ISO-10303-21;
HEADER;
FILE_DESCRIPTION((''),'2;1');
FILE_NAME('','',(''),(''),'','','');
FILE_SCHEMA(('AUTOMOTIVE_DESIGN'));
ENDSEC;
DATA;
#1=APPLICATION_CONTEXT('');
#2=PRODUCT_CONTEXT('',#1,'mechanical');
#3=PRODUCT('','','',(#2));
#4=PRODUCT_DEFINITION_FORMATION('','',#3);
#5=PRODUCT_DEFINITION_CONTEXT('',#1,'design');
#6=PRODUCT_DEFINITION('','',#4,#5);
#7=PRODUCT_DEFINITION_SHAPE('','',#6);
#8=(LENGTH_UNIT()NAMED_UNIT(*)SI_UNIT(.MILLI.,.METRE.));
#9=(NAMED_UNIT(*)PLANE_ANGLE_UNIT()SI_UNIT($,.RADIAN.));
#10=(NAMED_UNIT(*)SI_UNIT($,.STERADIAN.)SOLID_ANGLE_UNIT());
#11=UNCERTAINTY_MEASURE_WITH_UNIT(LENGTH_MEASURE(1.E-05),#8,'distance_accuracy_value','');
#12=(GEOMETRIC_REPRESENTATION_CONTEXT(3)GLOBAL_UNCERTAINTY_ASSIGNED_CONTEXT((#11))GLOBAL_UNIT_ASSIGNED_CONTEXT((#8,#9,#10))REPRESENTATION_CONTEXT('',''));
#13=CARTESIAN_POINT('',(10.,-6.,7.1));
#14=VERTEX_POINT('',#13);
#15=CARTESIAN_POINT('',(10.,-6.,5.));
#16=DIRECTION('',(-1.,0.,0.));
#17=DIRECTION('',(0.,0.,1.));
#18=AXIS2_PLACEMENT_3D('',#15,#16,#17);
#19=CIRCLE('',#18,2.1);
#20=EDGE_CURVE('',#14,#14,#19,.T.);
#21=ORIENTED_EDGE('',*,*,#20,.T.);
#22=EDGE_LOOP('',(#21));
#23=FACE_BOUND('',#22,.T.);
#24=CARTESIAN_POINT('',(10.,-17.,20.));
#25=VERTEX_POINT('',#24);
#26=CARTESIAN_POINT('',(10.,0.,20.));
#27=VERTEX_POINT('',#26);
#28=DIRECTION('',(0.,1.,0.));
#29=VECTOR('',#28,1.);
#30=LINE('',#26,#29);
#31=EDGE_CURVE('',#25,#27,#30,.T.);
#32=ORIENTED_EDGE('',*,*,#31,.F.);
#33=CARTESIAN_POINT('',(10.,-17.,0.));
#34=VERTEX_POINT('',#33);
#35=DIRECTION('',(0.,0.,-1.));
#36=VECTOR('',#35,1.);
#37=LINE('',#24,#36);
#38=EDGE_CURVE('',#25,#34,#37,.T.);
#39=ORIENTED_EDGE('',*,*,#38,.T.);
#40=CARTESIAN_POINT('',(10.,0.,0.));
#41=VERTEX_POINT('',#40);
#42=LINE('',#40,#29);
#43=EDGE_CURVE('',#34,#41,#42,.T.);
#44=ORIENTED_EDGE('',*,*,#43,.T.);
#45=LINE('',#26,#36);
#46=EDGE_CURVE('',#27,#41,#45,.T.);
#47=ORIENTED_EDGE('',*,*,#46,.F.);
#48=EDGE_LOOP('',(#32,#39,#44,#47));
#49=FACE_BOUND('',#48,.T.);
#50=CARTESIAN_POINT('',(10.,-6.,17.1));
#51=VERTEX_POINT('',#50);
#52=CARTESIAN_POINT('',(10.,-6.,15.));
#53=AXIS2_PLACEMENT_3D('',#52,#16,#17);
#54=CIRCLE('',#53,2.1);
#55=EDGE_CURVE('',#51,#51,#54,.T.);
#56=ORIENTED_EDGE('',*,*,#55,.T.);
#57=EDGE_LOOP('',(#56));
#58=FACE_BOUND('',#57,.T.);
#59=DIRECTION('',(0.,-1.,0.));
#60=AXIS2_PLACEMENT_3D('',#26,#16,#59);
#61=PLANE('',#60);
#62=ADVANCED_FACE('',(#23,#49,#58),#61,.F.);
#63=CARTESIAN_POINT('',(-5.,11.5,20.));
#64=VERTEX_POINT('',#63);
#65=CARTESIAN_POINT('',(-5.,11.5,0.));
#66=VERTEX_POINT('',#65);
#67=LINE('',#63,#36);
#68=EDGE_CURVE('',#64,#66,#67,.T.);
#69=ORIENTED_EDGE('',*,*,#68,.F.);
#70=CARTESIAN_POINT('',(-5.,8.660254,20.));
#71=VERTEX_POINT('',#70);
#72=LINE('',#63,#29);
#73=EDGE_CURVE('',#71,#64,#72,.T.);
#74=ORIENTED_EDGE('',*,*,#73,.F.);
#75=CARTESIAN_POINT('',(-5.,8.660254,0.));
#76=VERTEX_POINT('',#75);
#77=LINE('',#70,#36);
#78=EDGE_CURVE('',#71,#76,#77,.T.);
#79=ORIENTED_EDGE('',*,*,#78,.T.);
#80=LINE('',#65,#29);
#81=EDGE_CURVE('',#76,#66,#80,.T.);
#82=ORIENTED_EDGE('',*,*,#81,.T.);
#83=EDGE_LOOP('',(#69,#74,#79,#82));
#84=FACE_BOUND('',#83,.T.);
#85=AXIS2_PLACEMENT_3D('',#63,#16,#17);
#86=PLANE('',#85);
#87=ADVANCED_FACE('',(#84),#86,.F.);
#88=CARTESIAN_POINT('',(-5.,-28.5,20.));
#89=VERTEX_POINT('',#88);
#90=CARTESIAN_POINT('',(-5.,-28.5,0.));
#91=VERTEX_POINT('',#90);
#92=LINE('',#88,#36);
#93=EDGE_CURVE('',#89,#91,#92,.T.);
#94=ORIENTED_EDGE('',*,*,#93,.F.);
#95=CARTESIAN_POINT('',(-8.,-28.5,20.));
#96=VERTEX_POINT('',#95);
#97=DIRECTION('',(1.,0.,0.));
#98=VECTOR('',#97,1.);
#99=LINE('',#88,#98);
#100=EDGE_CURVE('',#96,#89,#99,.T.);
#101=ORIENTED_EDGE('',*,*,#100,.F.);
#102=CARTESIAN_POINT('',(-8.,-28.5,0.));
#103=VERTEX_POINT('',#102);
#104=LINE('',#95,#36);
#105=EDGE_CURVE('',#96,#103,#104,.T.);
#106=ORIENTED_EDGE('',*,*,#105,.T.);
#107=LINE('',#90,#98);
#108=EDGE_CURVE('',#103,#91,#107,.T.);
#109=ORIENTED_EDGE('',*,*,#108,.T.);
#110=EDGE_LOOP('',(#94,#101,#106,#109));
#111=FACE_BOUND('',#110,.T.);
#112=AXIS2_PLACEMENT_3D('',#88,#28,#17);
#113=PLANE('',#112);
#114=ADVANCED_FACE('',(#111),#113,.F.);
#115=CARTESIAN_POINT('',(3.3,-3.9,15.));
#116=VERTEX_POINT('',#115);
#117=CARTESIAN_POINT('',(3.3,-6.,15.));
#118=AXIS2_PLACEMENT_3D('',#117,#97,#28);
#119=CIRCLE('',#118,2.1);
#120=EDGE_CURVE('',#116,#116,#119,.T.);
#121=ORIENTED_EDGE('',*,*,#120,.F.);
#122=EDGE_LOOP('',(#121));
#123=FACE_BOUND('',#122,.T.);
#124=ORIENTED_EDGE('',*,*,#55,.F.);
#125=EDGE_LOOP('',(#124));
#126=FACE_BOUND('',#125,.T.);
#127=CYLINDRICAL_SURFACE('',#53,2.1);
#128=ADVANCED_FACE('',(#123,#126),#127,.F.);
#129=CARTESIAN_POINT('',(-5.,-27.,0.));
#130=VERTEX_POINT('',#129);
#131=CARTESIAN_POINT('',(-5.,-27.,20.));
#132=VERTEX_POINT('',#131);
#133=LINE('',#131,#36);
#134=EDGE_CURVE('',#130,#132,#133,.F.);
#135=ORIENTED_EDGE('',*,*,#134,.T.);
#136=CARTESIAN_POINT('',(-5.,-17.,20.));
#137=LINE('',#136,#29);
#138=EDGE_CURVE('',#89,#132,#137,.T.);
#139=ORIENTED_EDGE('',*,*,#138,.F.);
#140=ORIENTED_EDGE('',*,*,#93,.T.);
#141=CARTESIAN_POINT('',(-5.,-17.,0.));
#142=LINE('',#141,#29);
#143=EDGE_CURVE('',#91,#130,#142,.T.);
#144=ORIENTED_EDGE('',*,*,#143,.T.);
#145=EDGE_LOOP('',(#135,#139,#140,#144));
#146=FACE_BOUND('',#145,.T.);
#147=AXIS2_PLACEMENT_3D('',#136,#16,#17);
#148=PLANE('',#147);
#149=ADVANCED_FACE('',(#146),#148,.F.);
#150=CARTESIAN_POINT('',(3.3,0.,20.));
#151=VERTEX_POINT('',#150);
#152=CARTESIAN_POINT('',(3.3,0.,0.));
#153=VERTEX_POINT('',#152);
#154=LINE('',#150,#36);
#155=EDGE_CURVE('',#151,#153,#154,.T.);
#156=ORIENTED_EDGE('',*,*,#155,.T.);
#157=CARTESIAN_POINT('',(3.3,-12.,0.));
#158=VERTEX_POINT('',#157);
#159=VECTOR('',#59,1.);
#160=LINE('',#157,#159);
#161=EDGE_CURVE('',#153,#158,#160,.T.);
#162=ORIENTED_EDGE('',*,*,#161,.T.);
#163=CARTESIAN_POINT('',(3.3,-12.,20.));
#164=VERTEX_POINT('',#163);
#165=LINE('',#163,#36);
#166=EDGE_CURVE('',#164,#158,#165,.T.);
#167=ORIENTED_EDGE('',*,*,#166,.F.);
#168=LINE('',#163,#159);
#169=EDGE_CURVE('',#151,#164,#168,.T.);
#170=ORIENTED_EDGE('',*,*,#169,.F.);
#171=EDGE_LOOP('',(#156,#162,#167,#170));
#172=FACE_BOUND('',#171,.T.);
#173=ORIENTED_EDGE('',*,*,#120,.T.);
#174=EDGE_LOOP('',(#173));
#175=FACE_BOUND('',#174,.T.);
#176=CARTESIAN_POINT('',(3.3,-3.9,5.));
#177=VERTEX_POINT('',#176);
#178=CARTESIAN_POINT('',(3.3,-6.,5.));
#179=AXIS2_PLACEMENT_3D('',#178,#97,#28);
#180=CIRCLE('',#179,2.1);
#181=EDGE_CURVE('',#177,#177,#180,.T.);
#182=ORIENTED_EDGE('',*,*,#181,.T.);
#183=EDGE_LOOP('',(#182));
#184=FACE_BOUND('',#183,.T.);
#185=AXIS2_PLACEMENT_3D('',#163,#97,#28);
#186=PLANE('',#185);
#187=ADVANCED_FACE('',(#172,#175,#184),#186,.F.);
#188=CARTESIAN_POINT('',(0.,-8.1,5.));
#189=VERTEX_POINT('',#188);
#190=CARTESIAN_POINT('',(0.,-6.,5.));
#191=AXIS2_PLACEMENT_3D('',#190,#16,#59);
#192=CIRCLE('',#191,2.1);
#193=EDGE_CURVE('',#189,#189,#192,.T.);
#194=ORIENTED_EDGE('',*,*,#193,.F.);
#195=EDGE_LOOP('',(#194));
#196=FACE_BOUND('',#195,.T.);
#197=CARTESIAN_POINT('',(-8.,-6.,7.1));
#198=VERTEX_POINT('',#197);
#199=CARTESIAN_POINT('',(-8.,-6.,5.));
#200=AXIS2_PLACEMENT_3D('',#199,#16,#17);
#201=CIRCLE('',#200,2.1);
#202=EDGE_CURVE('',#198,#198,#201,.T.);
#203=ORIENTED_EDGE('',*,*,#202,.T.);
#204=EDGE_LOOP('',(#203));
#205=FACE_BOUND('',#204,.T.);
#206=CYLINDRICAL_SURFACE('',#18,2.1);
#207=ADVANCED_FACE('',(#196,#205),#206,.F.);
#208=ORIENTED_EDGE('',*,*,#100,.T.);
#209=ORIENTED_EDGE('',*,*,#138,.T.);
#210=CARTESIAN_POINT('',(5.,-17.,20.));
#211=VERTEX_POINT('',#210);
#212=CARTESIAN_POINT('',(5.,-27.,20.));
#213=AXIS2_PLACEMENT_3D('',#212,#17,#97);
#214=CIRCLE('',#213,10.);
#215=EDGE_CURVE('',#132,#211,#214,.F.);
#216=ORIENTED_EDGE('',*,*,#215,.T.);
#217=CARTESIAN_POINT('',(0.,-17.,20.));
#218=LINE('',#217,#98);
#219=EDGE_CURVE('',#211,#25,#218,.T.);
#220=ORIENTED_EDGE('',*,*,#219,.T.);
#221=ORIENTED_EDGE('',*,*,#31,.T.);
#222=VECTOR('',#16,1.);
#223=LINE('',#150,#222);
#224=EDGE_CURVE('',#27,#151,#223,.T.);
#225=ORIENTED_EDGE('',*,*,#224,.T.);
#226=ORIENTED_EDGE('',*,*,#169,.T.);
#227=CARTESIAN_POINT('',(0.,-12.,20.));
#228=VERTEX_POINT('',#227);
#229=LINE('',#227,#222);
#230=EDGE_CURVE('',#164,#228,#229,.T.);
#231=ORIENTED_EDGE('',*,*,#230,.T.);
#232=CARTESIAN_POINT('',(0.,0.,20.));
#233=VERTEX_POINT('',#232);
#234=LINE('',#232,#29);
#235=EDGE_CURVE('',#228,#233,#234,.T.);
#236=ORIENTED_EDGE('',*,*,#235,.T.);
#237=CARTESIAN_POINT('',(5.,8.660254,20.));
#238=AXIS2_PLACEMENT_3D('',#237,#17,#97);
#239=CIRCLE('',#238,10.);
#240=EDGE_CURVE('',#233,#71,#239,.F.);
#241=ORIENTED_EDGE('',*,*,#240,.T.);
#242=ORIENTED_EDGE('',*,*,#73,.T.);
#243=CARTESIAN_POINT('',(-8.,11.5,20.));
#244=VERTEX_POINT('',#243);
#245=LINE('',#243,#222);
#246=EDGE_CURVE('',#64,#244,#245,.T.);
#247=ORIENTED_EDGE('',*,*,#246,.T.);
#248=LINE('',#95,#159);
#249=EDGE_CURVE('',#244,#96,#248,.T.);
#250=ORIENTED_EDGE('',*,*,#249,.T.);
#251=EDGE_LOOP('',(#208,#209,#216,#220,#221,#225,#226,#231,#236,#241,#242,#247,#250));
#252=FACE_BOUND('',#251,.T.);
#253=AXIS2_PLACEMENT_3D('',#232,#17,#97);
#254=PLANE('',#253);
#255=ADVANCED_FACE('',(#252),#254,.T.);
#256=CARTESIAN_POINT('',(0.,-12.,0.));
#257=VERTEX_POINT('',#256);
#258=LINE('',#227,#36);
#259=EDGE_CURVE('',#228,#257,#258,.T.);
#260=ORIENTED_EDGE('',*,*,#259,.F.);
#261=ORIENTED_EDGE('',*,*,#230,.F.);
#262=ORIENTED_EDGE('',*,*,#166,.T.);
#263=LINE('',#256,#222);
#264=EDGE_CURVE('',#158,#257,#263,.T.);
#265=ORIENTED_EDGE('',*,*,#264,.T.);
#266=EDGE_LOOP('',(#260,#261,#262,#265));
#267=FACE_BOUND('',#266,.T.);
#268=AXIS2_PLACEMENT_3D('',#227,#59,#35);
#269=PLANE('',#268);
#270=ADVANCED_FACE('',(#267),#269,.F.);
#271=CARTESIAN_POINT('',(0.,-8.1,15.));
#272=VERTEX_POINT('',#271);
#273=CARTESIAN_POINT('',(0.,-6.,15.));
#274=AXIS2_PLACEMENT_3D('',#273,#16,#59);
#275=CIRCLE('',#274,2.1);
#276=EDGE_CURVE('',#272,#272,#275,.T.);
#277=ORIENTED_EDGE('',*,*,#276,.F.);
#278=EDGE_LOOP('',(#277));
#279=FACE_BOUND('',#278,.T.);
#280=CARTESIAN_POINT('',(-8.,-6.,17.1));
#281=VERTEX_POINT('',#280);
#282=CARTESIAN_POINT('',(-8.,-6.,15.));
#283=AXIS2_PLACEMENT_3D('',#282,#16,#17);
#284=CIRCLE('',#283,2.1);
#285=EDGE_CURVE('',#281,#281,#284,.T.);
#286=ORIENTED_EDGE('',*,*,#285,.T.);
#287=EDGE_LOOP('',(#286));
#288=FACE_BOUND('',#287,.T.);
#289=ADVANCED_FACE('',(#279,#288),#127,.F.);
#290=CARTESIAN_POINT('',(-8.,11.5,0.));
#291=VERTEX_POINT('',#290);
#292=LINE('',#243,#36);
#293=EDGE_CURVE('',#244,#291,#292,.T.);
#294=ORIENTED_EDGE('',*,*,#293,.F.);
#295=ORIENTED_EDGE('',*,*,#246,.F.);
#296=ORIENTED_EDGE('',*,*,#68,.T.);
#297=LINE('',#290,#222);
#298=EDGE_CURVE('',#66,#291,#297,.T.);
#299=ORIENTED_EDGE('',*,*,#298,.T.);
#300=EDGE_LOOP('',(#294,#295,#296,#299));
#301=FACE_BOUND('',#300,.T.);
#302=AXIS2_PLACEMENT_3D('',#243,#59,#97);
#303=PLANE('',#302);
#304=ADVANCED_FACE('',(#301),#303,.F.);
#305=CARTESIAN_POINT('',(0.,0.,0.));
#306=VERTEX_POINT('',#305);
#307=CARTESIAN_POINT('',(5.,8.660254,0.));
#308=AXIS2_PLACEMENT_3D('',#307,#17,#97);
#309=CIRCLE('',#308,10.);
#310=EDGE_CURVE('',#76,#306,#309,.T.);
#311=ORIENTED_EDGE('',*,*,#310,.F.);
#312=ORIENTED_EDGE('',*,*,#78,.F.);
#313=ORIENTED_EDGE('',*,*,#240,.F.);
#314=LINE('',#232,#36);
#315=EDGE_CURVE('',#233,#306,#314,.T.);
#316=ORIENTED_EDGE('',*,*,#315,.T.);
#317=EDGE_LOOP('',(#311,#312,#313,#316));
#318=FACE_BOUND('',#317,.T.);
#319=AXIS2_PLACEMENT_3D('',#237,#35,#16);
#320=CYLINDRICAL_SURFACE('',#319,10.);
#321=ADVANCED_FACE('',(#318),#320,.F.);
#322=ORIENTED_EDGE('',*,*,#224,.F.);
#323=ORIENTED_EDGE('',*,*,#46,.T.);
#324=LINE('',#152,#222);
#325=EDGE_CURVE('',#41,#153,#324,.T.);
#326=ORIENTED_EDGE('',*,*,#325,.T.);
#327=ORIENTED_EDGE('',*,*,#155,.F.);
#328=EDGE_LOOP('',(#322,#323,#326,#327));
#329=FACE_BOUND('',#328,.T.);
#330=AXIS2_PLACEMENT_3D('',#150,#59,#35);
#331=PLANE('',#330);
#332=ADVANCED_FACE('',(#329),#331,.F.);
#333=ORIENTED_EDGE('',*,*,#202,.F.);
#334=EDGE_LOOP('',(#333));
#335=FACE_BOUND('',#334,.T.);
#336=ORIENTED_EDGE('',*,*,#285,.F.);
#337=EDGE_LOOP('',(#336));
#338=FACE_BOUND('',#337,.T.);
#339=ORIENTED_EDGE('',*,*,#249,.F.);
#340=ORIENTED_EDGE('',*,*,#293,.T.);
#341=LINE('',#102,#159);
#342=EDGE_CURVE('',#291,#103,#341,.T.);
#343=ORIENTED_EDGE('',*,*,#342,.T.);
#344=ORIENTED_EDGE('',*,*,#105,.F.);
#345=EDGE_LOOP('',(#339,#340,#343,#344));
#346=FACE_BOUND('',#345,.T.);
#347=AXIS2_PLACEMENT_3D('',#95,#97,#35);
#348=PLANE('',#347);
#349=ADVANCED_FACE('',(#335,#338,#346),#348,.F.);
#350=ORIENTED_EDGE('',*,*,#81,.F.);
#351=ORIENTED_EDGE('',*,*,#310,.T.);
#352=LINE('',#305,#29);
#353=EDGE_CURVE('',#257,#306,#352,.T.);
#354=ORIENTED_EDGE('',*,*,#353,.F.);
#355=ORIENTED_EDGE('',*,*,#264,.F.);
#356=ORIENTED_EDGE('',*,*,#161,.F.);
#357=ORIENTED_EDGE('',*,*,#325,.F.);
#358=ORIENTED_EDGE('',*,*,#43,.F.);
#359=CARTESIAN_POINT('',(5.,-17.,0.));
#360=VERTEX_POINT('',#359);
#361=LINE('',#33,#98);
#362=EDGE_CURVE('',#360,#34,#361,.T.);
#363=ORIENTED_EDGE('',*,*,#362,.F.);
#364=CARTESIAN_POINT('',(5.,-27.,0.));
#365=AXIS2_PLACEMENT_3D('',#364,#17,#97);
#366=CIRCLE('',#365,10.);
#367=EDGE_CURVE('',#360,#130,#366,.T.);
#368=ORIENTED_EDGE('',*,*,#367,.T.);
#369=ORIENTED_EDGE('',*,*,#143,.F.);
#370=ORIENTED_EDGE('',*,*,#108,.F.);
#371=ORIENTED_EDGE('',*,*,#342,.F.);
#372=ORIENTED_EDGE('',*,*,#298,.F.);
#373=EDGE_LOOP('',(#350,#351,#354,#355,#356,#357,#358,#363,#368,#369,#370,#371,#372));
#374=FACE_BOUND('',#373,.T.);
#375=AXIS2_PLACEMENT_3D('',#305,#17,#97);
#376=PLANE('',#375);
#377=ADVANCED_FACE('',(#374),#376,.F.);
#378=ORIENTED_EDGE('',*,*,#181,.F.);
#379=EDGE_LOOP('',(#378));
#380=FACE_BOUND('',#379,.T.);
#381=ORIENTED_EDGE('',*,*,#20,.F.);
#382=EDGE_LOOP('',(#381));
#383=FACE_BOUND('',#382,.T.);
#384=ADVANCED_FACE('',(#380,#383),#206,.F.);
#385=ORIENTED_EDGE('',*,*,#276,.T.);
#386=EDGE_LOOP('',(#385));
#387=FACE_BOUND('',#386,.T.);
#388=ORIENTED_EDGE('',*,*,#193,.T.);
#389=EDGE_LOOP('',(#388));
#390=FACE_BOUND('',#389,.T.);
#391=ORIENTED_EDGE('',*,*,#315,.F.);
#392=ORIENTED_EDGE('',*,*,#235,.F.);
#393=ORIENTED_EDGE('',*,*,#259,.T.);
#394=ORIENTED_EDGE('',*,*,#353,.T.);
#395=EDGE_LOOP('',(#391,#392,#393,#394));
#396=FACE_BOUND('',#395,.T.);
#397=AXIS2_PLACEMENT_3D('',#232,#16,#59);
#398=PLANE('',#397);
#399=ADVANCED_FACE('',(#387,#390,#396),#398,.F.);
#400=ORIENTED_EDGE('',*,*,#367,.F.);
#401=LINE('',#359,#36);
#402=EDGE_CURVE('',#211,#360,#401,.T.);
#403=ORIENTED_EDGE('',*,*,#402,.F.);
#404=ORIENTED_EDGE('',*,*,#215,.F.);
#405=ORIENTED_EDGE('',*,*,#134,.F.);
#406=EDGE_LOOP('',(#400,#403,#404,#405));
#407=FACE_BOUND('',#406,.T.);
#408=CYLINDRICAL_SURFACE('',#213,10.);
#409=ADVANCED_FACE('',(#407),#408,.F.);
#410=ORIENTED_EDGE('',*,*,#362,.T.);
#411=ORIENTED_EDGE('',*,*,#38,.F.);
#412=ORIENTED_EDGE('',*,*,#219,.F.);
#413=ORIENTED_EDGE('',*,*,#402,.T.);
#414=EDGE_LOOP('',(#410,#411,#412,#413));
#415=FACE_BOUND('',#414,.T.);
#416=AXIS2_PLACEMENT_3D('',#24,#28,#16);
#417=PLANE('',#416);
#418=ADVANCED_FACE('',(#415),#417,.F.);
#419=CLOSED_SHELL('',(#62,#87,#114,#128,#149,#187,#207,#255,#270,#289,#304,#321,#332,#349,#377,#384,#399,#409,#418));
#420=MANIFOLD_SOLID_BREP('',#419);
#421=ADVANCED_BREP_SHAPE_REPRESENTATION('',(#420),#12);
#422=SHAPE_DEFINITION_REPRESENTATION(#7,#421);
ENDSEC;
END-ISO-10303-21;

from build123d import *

# Parameters (mm, degrees)
EXTRUDE_1_DEPTH     = 20
FILLET_1_R          = 10
SKETCH_2_R          = 2.1
CUT_EXTRUDE_1_DEPTH = 40.195025195


with BuildPart() as part:
    # 草图1 → 凸台-拉伸1 (new body)
    with BuildSketch(Plane.XY):
        Polygon((3.3, 0), (10, 0), (10, -17), (0, -17), (-5, -17), (-5, -28.5), (-8, -28.5), (-8, 11.5), (-5, 11.5), (-5, 0), (0, 0), (0, -12), (3.3, -12), align=None)
    extrude(amount=EXTRUDE_1_DEPTH)

    # 圆角1
    # the kernel refuses this fillet: 10 mm, written as the material it adds along each edge
    with BuildSketch(Plane(origin=(-5, -17, 0), x_dir=(0, -1, 0), z_dir=(0, 0, 1))) as fillet_1_piece_1:
        with BuildLine():
            CenterArc((FILLET_1_R, FILLET_1_R), FILLET_1_R, 180, 90)
            Line((0, FILLET_1_R), (-FILLET_1_R * 0.02, FILLET_1_R))
            Line((-FILLET_1_R * 0.02, FILLET_1_R), (-FILLET_1_R * 0.02, -FILLET_1_R * 0.02))
            Line((-FILLET_1_R * 0.02, -FILLET_1_R * 0.02), (FILLET_1_R, -FILLET_1_R * 0.02))
            Line((FILLET_1_R, -FILLET_1_R * 0.02), (FILLET_1_R, 0))
        make_face()
    extrude(amount=20)
    with BuildSketch(Plane(origin=(-5, 0, 0), x_dir=(1, 0, 0), z_dir=(0, 0, 1))) as fillet_1_piece_2:
        with BuildLine():
            CenterArc((10, 8.660254038), FILLET_1_R, 180, 60)
            Line((0, 8.660254038), (-0.2, 8.660254038))
            Line((-0.2, 8.660254038), (-0.2, 0))
            Line((-0.2, 0), (0, -0.2))
            ThreePointArc((0, -0.2), (2.5, -0.2), (4.9, -0.173205081))
            Line((4.9, -0.173205081), (5, 0))
        make_face()
    extrude(amount=20)

    # 草图2 → 切除-拉伸1 (cut, through all)
    with BuildSketch(Plane.ZY.offset(8)):
        with Locations((5, -6)):
            Circle(SKETCH_2_R)
        with Locations((15, -6)):
            Circle(SKETCH_2_R)
    extrude(amount=-CUT_EXTRUDE_1_DEPTH, mode=Mode.SUBTRACT)


solid = part.part
